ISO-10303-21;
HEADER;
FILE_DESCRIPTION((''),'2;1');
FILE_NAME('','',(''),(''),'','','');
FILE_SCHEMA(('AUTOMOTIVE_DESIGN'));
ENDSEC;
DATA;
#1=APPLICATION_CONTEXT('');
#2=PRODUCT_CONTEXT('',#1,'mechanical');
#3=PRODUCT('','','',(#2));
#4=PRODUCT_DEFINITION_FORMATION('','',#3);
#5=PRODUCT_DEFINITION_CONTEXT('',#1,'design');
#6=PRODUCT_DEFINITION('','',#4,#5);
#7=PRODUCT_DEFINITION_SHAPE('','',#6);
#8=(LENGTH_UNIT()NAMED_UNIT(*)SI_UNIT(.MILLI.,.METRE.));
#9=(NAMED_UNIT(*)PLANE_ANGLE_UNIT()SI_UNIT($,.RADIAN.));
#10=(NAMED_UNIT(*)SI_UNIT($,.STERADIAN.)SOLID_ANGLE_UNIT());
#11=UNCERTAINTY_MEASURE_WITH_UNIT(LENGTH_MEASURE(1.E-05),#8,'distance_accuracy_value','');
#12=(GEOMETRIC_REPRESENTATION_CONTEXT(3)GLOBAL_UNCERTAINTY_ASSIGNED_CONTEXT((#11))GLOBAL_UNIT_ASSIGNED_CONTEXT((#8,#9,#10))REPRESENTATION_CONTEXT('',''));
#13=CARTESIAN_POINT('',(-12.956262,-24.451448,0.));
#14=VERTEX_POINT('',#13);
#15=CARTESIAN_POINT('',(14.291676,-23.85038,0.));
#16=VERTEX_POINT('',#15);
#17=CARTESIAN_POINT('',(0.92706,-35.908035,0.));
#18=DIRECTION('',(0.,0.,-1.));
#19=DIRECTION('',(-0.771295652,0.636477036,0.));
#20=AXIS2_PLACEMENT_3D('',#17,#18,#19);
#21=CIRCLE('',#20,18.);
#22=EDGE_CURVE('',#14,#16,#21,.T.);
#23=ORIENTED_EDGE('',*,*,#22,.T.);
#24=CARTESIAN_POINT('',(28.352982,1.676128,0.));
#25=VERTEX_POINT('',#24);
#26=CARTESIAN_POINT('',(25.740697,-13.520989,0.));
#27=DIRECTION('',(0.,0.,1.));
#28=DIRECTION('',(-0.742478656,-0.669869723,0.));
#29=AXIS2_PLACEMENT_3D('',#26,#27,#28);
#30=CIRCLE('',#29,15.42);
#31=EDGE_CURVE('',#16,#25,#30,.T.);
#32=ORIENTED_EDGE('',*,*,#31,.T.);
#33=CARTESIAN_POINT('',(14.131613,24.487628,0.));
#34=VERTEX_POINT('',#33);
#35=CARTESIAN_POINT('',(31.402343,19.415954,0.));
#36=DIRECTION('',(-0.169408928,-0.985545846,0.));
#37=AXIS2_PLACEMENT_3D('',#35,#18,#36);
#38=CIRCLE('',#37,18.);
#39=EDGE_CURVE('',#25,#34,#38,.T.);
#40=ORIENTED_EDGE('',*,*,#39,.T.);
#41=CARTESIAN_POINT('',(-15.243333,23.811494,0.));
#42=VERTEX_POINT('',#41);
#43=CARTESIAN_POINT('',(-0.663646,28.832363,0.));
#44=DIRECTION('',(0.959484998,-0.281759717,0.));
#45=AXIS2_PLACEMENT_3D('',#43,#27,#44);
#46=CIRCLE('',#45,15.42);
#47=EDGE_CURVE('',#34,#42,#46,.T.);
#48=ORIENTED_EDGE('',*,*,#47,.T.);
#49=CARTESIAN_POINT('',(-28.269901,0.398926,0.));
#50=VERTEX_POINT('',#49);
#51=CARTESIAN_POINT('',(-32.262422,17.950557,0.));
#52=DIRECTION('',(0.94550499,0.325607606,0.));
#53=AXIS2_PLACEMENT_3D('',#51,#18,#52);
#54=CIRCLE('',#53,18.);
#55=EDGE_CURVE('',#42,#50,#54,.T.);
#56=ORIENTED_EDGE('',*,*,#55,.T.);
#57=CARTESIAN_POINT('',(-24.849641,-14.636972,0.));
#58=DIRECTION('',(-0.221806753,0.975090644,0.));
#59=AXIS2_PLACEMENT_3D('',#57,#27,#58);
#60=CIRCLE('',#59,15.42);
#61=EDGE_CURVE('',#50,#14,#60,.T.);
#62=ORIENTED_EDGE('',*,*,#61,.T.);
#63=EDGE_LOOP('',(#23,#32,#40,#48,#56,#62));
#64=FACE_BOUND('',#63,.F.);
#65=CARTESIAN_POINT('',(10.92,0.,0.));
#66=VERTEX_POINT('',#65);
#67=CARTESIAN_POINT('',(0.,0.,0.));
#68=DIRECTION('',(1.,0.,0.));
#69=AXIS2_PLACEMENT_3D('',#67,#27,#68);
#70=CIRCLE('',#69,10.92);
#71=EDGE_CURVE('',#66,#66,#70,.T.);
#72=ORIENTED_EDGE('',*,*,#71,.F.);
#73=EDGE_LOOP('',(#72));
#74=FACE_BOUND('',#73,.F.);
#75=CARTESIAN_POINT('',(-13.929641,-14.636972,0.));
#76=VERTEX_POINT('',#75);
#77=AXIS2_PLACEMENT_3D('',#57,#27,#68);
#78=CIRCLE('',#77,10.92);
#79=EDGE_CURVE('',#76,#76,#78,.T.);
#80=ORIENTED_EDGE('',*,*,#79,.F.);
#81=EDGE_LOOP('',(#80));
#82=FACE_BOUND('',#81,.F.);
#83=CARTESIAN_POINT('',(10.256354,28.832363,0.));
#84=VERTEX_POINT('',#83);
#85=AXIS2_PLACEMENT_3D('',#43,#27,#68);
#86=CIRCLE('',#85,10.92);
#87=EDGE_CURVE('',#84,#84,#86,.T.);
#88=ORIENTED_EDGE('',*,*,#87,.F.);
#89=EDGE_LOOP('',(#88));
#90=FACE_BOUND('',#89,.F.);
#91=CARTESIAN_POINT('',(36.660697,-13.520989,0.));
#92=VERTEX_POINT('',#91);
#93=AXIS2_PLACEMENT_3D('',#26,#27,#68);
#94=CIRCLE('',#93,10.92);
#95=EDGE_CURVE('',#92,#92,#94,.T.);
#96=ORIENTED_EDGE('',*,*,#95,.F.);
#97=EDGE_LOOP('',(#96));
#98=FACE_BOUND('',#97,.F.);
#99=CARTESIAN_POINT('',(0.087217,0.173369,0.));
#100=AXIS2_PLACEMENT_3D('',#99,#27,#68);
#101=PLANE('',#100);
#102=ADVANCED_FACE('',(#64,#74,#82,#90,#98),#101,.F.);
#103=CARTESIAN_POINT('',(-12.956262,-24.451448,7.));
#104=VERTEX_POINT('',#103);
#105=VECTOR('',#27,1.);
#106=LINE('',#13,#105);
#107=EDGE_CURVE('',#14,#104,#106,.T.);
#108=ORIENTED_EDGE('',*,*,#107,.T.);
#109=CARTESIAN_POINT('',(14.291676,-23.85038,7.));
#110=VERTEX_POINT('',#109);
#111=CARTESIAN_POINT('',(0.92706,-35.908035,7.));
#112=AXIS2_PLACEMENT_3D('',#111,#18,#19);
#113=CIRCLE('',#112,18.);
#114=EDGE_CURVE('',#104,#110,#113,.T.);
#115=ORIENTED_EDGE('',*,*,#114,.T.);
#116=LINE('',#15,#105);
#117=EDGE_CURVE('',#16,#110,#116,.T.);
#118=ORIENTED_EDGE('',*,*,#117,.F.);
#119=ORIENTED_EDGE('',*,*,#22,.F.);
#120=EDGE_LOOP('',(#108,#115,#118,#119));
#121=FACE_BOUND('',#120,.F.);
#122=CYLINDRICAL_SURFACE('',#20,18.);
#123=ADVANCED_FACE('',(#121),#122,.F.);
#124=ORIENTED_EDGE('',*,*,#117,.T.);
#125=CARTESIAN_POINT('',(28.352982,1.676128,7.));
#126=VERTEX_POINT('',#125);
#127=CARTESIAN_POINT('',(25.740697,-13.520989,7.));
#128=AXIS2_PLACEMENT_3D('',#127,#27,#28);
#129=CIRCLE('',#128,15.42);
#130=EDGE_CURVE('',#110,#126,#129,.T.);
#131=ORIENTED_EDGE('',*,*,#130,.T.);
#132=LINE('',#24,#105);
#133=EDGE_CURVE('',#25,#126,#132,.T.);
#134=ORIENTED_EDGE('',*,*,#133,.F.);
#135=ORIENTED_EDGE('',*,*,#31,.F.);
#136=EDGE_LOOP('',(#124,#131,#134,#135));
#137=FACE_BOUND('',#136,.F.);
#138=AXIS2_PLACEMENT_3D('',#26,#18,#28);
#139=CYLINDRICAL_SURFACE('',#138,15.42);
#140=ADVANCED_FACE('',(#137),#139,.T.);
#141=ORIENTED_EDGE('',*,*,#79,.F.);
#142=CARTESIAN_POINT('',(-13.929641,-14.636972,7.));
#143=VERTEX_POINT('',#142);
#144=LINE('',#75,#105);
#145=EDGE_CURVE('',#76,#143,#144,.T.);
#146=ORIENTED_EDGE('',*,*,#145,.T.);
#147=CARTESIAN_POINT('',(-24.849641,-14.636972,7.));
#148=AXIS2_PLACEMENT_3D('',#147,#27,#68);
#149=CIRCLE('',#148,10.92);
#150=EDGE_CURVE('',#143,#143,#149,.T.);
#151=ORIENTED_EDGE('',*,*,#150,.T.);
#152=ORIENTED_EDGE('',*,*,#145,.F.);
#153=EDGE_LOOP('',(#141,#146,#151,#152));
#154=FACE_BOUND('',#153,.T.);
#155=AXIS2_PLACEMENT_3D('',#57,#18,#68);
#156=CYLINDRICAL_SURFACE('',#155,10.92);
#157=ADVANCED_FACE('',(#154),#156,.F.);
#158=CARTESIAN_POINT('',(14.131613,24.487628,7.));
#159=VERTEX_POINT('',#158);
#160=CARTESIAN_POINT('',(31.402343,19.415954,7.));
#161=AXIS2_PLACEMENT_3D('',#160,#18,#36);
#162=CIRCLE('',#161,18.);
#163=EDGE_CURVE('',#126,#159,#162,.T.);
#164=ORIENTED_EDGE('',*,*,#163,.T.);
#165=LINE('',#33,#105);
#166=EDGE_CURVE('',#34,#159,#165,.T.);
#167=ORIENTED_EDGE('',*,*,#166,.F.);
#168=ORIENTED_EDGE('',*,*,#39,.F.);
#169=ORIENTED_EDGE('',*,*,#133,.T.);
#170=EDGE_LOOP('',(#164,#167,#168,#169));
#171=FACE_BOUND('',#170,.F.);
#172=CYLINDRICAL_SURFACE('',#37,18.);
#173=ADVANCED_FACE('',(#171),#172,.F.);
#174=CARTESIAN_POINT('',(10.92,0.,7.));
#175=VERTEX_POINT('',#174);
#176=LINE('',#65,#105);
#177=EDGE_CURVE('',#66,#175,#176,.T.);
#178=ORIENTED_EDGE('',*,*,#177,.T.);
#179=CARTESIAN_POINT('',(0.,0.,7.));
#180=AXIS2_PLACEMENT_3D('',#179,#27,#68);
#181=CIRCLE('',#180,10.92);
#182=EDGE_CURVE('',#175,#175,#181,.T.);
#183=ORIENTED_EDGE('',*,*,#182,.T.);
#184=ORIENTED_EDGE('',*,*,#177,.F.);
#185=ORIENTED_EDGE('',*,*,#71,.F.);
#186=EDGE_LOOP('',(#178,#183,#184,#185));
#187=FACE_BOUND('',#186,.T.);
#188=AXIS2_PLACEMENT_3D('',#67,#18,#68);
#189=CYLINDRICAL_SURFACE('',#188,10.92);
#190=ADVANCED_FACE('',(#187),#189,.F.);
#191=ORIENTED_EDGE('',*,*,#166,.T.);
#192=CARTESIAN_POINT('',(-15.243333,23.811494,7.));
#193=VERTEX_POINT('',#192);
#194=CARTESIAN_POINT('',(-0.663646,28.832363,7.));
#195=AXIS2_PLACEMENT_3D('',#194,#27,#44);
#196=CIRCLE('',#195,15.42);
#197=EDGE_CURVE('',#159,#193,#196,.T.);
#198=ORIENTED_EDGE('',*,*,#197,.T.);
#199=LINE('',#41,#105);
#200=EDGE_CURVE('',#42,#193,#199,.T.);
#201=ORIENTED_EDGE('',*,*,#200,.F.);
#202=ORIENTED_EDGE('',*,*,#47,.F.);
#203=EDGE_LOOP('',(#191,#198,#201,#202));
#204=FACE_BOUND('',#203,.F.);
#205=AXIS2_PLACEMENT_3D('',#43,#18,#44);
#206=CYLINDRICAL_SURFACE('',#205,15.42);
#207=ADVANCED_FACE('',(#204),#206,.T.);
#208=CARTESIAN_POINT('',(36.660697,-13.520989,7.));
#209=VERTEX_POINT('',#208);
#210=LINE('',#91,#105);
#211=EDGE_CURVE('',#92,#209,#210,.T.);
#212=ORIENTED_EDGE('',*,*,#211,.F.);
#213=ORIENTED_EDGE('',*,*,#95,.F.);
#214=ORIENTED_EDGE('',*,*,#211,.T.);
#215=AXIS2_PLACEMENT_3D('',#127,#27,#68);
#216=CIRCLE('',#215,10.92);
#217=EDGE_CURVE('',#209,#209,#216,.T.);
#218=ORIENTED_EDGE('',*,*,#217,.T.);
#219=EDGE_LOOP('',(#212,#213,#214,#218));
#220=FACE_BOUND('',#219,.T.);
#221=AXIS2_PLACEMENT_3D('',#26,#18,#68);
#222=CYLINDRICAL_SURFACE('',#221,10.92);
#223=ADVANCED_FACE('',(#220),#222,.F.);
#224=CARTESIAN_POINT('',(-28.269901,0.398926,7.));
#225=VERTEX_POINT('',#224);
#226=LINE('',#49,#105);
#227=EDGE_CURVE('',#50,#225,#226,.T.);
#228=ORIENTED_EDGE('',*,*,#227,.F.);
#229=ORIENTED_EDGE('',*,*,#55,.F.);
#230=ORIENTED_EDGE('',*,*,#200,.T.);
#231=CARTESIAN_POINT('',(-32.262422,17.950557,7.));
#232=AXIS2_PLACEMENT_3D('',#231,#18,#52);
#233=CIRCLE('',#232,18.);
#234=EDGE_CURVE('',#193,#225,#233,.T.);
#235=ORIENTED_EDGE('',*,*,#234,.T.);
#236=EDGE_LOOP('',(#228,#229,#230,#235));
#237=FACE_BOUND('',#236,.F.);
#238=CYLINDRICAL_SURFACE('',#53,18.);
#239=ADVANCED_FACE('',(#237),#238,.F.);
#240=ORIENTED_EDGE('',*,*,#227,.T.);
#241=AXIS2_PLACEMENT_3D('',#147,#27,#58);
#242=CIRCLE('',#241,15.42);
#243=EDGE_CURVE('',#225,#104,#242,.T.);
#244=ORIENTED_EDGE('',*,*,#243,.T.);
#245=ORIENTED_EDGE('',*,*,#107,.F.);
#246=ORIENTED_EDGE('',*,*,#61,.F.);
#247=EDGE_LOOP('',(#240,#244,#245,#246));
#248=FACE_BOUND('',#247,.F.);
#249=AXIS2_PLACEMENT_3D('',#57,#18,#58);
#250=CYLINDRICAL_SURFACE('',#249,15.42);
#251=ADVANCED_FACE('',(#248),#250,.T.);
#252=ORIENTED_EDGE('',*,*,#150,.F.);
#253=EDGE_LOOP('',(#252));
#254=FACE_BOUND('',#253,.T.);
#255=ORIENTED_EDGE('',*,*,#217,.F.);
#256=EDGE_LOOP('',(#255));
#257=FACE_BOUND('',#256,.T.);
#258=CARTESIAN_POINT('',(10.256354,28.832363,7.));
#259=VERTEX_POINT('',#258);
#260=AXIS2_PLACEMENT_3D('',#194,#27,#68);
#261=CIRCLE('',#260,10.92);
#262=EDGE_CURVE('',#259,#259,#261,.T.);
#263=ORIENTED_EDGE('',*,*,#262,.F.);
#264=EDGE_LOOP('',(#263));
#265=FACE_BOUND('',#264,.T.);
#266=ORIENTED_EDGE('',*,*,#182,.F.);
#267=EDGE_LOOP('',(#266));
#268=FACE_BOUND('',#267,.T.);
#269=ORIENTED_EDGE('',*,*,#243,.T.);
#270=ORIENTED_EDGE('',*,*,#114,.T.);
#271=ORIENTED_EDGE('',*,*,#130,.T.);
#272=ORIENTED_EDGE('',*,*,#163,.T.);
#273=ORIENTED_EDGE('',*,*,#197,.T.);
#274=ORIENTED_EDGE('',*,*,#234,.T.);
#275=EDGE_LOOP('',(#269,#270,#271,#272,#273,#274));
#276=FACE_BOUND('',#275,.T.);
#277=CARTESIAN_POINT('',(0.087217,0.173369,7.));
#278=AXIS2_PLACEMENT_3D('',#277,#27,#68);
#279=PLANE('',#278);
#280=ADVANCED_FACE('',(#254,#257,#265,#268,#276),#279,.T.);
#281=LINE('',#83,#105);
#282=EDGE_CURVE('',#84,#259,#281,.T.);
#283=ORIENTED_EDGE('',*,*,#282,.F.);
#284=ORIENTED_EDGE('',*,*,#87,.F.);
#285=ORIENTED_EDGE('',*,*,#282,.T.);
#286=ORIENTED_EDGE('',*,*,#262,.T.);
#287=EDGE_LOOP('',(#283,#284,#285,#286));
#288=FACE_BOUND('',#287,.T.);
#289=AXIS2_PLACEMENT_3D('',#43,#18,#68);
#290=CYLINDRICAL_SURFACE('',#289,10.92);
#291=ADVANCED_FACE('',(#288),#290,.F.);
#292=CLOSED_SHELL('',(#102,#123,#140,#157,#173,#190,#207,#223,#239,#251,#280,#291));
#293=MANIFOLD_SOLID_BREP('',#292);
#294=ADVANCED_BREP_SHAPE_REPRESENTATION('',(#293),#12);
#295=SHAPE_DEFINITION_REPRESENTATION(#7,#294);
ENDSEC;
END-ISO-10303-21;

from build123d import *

# Parameters (mm, degrees)
F0_R     = 10.92
F1_DEPTH = 7


# Not quite as in the source:
# - a feature names something its author has since deleted; it is built from what else it names


with BuildPart() as f1:
    # F0 (on Top) → F1 (new body)
    with BuildSketch(Plane.XY):
        with BuildLine():
            ThreePointArc((28.3529823071, 1.6761283467), (16.1276038689, 9.8932258121), (14.1316130419, 24.4876284834))
            ThreePointArc((14.1316130419, 24.4876284834), (-1.0184797386, 44.2482801815), (-15.2433325814, 23.8114940253))
            ThreePointArc((-15.2433325814, 23.8114940253), (-16.5331807129, 9.1989312159), (-28.2699008548, 0.3989255129))
            ThreePointArc((-28.2699008548, 0.3989255129), (-37.9772339165, -22.7266382845), (-12.9562617696, -24.4514481107))
            ThreePointArc((-12.9562617696, -24.4514481107), (0.5300904983, -17.9124126397), (14.291675769, -23.8503797349))
            ThreePointArc((14.291675769, -23.8503797349), (39.2470886778, -20.9610002997), (28.3529823071, 1.6761283467))
        make_face()
        with Locations((-24.849640726, -14.6369722206)):
            Circle(F0_R, mode=Mode.SUBTRACT)
        Circle(F0_R, mode=Mode.SUBTRACT)
        with Locations((25.7406966372, -13.5209886029)):
            Circle(F0_R, mode=Mode.SUBTRACT)
        with Locations((-0.6636456317, 28.8323633176)):
            Circle(F0_R, mode=Mode.SUBTRACT)
    extrude(amount=F1_DEPTH)


solid = f1.part
